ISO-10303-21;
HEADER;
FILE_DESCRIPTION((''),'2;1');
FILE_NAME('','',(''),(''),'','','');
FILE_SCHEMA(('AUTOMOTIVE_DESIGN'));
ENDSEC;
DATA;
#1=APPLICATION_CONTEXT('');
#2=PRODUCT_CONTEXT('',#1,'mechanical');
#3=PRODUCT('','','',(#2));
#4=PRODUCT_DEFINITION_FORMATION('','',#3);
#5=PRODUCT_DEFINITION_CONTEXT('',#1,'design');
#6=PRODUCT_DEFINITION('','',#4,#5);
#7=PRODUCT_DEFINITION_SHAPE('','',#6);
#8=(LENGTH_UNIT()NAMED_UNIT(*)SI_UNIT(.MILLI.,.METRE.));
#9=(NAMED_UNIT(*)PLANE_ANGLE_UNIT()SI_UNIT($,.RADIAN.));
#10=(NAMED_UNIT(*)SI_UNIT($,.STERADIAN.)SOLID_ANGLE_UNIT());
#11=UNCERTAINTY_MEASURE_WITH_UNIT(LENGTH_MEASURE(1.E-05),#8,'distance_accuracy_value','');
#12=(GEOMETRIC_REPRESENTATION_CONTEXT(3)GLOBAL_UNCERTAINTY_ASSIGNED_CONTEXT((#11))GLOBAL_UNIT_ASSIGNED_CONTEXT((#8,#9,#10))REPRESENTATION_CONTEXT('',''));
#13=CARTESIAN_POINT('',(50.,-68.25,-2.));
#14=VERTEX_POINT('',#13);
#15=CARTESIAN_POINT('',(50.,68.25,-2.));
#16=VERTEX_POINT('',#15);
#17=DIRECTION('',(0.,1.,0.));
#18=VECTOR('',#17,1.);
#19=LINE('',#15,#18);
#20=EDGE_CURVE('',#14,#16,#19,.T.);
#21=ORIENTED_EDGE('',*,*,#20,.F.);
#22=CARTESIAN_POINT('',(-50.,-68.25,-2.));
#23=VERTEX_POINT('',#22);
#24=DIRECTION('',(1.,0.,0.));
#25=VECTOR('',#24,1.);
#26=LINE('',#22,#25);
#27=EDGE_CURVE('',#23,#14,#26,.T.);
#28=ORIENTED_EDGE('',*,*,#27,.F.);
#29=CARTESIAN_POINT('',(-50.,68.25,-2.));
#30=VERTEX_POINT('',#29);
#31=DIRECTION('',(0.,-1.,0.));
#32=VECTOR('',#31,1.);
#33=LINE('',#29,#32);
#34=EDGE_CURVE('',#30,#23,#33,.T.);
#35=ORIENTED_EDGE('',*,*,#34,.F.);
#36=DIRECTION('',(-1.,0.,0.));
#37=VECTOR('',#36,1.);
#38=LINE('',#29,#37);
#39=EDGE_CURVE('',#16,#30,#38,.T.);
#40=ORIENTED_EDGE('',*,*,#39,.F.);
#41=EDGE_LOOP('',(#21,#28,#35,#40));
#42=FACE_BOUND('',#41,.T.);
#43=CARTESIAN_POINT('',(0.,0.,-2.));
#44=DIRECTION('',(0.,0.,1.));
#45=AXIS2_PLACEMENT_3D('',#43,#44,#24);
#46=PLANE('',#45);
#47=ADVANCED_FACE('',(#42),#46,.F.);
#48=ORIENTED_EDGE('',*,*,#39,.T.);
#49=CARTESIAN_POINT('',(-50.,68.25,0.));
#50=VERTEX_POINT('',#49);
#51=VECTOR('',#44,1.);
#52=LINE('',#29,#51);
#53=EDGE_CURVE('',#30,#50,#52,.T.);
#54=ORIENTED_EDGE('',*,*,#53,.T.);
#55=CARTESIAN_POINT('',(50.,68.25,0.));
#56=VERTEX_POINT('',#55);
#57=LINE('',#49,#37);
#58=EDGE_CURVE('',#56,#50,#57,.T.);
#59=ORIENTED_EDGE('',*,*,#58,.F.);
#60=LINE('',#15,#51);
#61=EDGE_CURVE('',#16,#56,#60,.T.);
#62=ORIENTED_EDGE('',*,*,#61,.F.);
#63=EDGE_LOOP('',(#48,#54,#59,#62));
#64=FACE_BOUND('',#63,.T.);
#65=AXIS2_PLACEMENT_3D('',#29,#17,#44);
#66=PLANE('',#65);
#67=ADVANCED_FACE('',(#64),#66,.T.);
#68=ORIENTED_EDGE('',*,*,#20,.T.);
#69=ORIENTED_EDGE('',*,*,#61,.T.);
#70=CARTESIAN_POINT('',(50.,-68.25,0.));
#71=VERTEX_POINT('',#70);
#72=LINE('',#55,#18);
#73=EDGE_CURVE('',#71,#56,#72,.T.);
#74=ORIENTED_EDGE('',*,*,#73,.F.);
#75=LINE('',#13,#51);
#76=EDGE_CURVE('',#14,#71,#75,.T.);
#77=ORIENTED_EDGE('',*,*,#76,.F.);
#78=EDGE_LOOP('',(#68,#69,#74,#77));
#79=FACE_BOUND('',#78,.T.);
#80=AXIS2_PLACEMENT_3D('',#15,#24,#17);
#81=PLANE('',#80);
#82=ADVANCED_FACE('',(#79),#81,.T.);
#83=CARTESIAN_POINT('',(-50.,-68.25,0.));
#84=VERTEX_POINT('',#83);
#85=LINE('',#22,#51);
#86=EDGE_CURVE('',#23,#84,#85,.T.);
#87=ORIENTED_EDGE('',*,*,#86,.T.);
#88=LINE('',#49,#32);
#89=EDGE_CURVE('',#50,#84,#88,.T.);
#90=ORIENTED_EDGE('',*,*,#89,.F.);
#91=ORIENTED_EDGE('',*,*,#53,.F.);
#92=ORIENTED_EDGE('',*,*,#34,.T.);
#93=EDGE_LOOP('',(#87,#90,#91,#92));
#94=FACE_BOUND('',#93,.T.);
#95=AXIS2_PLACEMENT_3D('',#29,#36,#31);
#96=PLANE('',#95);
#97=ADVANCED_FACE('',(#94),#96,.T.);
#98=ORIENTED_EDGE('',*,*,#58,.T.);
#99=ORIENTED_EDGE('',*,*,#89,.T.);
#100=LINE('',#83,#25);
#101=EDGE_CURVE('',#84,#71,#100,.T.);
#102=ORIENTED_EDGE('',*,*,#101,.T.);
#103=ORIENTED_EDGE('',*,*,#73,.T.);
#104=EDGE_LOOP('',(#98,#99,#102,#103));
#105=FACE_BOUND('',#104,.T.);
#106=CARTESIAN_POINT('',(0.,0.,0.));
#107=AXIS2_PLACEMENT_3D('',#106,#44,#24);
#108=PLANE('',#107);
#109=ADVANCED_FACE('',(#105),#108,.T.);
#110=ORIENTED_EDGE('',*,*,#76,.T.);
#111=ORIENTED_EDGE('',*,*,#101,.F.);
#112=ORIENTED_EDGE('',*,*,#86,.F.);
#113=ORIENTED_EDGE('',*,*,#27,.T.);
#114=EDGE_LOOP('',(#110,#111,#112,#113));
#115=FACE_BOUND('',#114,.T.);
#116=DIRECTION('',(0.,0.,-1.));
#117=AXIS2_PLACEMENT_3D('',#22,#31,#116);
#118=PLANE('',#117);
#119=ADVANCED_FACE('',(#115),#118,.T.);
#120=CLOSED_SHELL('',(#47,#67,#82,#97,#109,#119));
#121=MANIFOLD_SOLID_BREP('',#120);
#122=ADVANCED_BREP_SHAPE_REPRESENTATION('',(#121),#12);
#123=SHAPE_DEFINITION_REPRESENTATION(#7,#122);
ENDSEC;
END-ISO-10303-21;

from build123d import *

# Parameters (mm, degrees)
SKETCH_1_W             = 100
SKETCH_1_H             = 136.5
SM_BASE_FLANGE_1_DEPTH = 2


# Sheet-metal steps are written as plain solids
with BuildPart() as part:
    # Sketch 1 → 基体-法兰1 (new body)
    with BuildSketch(Plane.XY):
        Rectangle(SKETCH_1_W, SKETCH_1_H)
    extrude(amount=-SM_BASE_FLANGE_1_DEPTH)


solid = part.part
